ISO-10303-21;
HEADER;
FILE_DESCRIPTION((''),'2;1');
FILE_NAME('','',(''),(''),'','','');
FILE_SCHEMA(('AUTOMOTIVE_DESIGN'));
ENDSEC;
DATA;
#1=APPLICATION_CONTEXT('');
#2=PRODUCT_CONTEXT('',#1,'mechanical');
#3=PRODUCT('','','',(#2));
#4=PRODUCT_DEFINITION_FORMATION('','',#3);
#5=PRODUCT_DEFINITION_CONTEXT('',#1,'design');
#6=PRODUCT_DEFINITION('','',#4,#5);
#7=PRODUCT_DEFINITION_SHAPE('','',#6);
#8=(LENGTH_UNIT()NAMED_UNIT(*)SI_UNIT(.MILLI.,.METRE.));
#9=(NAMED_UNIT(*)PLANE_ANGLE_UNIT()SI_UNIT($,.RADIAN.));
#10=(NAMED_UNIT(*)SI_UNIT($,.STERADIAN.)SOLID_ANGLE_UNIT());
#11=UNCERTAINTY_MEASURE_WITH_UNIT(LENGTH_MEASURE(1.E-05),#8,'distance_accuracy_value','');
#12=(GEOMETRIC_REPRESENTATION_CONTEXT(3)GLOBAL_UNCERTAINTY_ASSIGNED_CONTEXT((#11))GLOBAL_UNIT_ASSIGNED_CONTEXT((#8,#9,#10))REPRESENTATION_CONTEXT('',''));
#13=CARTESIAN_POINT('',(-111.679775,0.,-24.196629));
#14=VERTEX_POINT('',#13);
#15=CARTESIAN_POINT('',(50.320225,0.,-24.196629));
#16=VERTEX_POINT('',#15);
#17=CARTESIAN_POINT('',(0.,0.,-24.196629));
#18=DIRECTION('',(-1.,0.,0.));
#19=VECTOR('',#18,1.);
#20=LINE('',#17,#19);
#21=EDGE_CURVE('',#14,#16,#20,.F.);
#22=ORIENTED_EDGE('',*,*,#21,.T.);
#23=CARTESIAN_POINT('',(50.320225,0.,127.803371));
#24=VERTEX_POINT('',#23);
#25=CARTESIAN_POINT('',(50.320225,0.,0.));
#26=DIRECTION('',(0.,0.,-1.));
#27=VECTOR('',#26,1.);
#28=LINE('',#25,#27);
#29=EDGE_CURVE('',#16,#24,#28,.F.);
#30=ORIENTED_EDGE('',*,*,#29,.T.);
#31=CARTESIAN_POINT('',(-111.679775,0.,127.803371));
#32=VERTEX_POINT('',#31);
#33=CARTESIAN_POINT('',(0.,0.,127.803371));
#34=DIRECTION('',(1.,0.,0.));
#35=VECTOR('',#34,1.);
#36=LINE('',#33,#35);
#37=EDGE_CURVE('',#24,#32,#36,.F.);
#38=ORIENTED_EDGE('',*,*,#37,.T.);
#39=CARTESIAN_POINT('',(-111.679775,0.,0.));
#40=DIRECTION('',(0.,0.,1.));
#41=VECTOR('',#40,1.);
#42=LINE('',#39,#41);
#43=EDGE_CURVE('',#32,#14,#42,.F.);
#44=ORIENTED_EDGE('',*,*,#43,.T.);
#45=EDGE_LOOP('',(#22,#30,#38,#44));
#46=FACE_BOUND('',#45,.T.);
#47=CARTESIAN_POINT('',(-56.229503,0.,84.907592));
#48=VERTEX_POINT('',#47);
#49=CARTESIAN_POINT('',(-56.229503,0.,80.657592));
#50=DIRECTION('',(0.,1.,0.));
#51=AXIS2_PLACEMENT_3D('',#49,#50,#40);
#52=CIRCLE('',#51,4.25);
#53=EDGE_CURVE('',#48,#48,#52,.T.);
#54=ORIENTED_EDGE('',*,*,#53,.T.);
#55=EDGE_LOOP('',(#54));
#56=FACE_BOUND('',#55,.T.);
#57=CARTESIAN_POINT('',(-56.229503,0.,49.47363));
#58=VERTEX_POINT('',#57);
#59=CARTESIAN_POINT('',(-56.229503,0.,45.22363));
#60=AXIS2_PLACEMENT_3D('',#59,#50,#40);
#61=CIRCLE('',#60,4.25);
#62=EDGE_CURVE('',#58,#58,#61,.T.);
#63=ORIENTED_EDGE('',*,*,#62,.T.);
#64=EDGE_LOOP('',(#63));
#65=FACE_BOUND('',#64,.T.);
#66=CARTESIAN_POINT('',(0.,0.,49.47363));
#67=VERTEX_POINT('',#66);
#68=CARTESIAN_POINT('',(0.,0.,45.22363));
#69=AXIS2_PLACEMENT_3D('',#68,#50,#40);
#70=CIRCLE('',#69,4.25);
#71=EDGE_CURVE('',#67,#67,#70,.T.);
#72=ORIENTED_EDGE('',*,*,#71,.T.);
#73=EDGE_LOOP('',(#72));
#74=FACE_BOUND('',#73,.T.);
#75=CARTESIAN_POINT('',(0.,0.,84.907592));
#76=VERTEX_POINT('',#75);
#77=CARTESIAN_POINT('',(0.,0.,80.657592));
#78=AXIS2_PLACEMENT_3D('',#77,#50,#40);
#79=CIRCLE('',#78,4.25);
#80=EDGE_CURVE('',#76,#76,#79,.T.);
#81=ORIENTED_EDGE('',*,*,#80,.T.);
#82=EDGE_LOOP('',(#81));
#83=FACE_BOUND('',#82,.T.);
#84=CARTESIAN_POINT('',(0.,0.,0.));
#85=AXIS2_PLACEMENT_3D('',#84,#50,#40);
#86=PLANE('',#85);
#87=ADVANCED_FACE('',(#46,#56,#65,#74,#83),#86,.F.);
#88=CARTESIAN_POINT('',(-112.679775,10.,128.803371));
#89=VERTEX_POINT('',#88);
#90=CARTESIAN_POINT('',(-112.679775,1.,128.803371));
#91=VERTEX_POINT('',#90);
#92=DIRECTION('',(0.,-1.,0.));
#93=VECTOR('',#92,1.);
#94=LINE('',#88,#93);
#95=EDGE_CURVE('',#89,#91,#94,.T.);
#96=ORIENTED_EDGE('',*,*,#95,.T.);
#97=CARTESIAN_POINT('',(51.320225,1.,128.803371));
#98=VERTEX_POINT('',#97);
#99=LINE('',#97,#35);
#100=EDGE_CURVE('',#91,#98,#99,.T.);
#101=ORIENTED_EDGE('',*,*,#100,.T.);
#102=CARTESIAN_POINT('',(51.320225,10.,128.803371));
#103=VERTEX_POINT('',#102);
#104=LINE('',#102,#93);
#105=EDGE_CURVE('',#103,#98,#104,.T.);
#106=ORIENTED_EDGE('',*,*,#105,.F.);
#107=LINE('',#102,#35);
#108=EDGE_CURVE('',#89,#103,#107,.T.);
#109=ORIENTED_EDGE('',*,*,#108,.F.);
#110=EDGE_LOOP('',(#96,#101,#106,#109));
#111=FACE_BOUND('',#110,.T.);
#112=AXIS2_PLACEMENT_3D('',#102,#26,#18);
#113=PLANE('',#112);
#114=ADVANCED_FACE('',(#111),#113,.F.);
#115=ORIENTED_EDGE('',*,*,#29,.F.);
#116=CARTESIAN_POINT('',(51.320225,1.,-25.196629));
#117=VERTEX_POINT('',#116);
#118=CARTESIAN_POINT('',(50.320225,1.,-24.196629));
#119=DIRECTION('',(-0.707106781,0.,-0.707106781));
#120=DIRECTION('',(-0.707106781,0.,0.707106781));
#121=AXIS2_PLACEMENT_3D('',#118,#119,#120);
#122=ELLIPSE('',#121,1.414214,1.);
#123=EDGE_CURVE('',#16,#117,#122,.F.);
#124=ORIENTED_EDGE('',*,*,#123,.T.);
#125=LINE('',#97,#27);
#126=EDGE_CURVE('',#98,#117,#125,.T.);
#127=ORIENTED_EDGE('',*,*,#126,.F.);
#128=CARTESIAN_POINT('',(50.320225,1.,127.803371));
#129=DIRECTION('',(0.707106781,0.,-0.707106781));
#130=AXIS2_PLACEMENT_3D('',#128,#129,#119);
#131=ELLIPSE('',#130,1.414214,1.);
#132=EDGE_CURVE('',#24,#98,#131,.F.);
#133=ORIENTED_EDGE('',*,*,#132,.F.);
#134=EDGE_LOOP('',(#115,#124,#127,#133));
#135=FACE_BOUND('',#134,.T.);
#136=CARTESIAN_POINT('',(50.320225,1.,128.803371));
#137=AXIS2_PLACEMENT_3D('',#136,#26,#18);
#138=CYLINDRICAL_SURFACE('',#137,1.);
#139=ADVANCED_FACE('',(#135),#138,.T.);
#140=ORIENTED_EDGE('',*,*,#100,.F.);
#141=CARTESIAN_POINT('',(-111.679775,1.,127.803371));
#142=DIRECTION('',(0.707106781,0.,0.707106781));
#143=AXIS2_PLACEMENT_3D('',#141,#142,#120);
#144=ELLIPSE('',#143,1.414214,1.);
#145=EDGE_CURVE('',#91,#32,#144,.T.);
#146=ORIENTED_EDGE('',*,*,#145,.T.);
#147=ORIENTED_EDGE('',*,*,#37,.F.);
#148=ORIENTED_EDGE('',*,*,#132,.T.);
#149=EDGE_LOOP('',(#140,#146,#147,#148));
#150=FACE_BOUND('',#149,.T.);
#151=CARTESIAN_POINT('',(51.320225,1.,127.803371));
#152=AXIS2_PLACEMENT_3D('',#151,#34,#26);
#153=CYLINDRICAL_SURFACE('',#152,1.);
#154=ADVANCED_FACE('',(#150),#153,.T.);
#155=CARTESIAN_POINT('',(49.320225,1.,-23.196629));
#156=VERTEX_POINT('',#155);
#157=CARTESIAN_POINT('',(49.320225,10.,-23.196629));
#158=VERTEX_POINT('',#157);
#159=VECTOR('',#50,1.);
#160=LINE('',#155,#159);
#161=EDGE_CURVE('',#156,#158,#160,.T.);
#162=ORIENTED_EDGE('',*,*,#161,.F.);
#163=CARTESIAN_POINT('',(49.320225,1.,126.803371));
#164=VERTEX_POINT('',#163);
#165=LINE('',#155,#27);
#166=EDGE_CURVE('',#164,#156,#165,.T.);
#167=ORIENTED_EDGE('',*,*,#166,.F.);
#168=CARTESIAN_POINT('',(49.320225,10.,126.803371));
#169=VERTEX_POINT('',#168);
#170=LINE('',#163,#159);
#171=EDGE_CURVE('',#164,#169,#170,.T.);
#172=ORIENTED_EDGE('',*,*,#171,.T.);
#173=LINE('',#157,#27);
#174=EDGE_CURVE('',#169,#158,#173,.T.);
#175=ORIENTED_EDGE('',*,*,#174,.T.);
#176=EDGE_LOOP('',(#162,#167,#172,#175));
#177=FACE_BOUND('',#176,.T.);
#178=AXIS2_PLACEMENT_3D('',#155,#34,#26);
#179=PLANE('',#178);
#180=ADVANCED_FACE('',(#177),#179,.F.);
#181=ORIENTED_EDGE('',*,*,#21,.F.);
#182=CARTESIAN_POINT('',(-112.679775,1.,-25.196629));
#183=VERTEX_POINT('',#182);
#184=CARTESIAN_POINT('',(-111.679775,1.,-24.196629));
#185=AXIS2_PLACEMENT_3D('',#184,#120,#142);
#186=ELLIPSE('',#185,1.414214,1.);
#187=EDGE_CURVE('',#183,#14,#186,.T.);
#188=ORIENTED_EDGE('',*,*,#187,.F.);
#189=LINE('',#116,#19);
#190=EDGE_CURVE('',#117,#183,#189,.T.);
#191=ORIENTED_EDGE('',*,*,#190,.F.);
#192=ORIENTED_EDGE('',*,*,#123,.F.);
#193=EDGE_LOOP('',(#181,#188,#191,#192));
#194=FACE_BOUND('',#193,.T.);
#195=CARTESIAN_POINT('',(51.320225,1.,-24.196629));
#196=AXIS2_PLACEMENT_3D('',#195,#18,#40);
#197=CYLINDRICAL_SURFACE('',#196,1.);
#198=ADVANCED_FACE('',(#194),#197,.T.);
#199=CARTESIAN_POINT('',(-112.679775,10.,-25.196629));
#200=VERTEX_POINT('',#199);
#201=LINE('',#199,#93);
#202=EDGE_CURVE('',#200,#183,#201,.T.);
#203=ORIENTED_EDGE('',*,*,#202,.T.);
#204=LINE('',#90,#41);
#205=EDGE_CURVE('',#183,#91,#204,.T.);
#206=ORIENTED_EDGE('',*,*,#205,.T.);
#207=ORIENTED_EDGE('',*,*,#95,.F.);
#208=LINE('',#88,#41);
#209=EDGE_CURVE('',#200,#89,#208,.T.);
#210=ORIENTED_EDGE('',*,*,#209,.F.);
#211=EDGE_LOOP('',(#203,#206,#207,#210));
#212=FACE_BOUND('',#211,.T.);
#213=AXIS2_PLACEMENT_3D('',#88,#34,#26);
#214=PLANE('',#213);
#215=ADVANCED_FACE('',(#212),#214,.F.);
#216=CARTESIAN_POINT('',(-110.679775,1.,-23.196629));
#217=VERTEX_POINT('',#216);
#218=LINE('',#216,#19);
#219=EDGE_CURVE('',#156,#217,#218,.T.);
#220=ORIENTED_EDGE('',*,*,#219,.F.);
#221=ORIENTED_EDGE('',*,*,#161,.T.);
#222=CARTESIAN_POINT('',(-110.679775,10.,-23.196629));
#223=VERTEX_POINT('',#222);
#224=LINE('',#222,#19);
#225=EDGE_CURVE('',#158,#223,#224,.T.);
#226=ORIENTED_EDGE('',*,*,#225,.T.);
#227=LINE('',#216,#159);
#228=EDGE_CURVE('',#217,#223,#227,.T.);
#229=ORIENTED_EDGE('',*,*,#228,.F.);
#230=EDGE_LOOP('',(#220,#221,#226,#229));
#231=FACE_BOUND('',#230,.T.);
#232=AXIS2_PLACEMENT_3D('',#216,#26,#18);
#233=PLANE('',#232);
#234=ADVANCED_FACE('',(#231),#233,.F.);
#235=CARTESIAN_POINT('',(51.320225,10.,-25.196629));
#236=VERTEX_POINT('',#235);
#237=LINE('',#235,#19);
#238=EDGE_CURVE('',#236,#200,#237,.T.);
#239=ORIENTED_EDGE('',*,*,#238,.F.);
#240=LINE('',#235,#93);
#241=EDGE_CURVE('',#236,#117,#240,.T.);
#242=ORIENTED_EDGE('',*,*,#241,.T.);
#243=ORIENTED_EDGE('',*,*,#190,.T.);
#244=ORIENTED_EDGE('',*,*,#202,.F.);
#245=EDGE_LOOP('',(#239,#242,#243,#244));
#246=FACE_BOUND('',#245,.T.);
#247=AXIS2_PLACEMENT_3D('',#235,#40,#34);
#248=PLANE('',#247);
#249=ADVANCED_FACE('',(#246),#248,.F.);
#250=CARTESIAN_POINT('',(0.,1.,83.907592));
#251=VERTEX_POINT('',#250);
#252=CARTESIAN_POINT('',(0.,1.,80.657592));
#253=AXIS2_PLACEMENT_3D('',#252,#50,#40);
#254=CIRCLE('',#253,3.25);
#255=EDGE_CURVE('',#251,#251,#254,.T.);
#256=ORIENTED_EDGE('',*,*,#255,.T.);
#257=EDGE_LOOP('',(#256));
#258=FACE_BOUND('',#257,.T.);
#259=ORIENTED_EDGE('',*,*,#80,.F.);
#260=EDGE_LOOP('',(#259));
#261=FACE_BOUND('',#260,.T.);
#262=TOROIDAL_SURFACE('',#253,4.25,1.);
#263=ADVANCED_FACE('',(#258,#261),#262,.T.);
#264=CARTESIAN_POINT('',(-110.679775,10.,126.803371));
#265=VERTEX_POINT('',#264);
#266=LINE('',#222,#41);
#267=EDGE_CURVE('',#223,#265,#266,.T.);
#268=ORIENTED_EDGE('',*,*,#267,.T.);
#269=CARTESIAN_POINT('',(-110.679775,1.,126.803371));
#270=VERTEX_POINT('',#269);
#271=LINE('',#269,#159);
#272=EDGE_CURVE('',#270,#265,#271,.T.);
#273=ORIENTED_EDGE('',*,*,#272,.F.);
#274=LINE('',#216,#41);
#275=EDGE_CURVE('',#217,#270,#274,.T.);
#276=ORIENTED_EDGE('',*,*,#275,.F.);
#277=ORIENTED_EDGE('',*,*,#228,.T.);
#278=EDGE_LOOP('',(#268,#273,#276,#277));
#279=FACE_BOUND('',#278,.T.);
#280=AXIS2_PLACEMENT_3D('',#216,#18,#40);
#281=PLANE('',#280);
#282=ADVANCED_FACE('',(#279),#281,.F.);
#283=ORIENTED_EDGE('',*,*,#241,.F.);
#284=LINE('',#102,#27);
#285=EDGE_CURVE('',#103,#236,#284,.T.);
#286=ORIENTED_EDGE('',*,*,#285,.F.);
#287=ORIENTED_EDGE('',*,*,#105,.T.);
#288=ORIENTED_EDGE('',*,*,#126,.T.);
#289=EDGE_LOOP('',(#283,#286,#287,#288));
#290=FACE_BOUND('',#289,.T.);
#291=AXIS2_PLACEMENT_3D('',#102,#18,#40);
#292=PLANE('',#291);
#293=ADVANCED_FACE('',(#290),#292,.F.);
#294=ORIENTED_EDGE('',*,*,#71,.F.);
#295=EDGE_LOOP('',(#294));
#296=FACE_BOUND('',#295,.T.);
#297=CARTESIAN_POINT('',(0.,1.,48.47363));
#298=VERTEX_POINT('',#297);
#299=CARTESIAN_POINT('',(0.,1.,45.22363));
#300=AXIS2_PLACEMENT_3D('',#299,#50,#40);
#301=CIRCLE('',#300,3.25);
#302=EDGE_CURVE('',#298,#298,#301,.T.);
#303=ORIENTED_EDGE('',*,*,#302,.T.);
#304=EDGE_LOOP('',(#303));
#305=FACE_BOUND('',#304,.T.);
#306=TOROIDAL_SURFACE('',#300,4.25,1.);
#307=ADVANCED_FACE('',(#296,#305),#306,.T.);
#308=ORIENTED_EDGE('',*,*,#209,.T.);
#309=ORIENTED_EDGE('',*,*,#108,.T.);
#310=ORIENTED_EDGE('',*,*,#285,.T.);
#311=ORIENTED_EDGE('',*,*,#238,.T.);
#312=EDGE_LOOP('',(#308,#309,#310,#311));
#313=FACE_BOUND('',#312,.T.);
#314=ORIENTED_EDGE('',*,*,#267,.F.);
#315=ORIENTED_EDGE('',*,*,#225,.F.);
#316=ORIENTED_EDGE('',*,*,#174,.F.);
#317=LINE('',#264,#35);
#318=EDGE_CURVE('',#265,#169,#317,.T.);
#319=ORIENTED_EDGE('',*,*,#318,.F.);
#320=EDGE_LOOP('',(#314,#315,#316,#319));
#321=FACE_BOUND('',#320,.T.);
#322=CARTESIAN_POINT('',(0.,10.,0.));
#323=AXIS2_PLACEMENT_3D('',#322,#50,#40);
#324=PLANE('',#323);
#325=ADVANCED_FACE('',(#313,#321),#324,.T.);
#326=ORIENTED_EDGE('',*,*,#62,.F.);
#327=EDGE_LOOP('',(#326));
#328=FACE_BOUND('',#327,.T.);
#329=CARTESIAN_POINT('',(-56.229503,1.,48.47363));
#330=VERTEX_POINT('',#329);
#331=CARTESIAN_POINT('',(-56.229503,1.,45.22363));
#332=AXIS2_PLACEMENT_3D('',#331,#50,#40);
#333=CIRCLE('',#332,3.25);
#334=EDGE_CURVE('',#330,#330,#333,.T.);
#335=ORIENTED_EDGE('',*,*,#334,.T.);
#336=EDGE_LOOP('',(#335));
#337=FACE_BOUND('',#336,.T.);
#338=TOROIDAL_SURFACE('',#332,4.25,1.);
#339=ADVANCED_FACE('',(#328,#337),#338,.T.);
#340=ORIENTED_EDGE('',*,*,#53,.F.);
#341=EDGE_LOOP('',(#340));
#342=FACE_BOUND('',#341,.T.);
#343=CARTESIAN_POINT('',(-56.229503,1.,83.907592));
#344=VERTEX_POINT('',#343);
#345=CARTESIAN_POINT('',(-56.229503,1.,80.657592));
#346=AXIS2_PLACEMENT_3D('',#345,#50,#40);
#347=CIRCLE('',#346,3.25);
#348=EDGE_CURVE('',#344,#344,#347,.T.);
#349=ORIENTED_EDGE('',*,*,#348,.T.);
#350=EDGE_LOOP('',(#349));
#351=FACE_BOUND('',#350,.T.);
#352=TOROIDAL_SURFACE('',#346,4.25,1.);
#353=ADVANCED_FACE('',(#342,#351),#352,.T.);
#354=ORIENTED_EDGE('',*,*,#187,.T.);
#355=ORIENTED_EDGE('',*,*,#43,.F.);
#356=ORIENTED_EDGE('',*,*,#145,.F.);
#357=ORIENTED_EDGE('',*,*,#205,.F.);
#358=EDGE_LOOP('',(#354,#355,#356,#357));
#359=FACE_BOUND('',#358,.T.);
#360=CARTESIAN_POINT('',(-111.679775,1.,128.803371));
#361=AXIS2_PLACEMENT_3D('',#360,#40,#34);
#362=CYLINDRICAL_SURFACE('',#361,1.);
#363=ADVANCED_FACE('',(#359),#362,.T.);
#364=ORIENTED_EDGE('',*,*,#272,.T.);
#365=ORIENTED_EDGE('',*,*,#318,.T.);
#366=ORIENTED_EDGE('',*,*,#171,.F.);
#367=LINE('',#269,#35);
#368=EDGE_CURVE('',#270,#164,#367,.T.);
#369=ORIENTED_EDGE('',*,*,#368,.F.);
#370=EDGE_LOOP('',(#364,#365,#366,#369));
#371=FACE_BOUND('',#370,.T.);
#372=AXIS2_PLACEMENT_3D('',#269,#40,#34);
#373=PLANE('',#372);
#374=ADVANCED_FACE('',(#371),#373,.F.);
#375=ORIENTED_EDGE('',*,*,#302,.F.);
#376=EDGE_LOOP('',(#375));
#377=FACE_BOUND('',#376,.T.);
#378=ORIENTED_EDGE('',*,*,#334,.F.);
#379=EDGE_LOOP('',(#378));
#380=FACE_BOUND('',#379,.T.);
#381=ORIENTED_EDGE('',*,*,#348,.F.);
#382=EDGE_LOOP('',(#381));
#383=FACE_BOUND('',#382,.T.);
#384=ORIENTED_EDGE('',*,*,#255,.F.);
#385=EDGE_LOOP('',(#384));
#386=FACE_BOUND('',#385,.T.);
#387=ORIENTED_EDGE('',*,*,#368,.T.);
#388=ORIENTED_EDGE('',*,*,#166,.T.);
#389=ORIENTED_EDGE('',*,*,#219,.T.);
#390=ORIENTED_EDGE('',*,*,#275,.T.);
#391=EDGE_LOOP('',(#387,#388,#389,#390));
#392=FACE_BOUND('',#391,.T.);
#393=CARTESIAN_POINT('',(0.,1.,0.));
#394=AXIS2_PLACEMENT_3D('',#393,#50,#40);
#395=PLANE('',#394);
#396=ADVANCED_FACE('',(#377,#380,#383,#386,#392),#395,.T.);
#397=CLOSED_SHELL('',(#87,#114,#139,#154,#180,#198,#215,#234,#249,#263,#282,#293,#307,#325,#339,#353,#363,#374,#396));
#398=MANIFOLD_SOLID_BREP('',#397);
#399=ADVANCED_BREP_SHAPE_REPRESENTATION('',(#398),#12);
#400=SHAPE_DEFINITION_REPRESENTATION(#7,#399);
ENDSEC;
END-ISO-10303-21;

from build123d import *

# Parameters (mm, degrees)
SKETCH1_W           = 164
SKETCH1_H           = 154
SKETCH1_R           = 3.25
BOSS_EXTRUDE1_DEPTH = 10
SKETCH2_W           = 160
SKETCH2_H           = 150
CUT_EXTRUDE1_DEPTH  = 9
FILLET2_R           = 1


with BuildPart() as part:
    # Sketch1 → Boss-Extrude1 (new body)
    with BuildSketch(Plane(origin=(0, 0, 0), x_dir=(1, 0, 0), z_dir=(0, 1, 0))):
        with Locations((-30.679775281, -51.803370787)):
            Rectangle(SKETCH1_W, SKETCH1_H)
        with Locations(Location((-56.229503417, -45.223629633, 0), (0, 0, 270))):
            Circle(SKETCH1_R, mode=Mode.SUBTRACT)
        with Locations(Location((0, -45.223629633, 0), (0, 0, 270))):
            Circle(SKETCH1_R, mode=Mode.SUBTRACT)
        with Locations(Location((-56.229503417, -80.657592441, 0), (0, 0, 270))):
            Circle(SKETCH1_R, mode=Mode.SUBTRACT)
        with Locations(Location((0, -80.657592441, 0), (0, 0, 270))):
            Circle(SKETCH1_R, mode=Mode.SUBTRACT)
    extrude(amount=BOSS_EXTRUDE1_DEPTH)

    # Sketch2 → Cut-Extrude1 (cut)
    with BuildSketch(Plane(origin=(0, 10, 0), x_dir=(1, 0, 0), z_dir=(0, 1, 0))):
        with Locations((-30.679775281, -51.803370787)):
            Rectangle(SKETCH2_W, SKETCH2_H)
    extrude(amount=-CUT_EXTRUDE1_DEPTH, mode=Mode.SUBTRACT)

    # Fillet2
    fillet2_edges = [part.edges().sort_by_distance(p)[0] for p in [
        (-56.229503417, 0, 41.973629633),
        (0, 0, 41.973629633),
        (-56.229503417, 0, 77.407592441),
        (0, 0, 77.407592441),
        (-30.679775281, 0, -25.196629213),
        (51.320224719, 0, 51.803370787),
        (-30.679775281, 0, 128.803370787),
        (-112.679775281, 0, 51.803370787),
    ]]
    fillet(fillet2_edges, radius=FILLET2_R - 0.0001)  # a hair under: the kernel refuses the full size


solid = part.part
